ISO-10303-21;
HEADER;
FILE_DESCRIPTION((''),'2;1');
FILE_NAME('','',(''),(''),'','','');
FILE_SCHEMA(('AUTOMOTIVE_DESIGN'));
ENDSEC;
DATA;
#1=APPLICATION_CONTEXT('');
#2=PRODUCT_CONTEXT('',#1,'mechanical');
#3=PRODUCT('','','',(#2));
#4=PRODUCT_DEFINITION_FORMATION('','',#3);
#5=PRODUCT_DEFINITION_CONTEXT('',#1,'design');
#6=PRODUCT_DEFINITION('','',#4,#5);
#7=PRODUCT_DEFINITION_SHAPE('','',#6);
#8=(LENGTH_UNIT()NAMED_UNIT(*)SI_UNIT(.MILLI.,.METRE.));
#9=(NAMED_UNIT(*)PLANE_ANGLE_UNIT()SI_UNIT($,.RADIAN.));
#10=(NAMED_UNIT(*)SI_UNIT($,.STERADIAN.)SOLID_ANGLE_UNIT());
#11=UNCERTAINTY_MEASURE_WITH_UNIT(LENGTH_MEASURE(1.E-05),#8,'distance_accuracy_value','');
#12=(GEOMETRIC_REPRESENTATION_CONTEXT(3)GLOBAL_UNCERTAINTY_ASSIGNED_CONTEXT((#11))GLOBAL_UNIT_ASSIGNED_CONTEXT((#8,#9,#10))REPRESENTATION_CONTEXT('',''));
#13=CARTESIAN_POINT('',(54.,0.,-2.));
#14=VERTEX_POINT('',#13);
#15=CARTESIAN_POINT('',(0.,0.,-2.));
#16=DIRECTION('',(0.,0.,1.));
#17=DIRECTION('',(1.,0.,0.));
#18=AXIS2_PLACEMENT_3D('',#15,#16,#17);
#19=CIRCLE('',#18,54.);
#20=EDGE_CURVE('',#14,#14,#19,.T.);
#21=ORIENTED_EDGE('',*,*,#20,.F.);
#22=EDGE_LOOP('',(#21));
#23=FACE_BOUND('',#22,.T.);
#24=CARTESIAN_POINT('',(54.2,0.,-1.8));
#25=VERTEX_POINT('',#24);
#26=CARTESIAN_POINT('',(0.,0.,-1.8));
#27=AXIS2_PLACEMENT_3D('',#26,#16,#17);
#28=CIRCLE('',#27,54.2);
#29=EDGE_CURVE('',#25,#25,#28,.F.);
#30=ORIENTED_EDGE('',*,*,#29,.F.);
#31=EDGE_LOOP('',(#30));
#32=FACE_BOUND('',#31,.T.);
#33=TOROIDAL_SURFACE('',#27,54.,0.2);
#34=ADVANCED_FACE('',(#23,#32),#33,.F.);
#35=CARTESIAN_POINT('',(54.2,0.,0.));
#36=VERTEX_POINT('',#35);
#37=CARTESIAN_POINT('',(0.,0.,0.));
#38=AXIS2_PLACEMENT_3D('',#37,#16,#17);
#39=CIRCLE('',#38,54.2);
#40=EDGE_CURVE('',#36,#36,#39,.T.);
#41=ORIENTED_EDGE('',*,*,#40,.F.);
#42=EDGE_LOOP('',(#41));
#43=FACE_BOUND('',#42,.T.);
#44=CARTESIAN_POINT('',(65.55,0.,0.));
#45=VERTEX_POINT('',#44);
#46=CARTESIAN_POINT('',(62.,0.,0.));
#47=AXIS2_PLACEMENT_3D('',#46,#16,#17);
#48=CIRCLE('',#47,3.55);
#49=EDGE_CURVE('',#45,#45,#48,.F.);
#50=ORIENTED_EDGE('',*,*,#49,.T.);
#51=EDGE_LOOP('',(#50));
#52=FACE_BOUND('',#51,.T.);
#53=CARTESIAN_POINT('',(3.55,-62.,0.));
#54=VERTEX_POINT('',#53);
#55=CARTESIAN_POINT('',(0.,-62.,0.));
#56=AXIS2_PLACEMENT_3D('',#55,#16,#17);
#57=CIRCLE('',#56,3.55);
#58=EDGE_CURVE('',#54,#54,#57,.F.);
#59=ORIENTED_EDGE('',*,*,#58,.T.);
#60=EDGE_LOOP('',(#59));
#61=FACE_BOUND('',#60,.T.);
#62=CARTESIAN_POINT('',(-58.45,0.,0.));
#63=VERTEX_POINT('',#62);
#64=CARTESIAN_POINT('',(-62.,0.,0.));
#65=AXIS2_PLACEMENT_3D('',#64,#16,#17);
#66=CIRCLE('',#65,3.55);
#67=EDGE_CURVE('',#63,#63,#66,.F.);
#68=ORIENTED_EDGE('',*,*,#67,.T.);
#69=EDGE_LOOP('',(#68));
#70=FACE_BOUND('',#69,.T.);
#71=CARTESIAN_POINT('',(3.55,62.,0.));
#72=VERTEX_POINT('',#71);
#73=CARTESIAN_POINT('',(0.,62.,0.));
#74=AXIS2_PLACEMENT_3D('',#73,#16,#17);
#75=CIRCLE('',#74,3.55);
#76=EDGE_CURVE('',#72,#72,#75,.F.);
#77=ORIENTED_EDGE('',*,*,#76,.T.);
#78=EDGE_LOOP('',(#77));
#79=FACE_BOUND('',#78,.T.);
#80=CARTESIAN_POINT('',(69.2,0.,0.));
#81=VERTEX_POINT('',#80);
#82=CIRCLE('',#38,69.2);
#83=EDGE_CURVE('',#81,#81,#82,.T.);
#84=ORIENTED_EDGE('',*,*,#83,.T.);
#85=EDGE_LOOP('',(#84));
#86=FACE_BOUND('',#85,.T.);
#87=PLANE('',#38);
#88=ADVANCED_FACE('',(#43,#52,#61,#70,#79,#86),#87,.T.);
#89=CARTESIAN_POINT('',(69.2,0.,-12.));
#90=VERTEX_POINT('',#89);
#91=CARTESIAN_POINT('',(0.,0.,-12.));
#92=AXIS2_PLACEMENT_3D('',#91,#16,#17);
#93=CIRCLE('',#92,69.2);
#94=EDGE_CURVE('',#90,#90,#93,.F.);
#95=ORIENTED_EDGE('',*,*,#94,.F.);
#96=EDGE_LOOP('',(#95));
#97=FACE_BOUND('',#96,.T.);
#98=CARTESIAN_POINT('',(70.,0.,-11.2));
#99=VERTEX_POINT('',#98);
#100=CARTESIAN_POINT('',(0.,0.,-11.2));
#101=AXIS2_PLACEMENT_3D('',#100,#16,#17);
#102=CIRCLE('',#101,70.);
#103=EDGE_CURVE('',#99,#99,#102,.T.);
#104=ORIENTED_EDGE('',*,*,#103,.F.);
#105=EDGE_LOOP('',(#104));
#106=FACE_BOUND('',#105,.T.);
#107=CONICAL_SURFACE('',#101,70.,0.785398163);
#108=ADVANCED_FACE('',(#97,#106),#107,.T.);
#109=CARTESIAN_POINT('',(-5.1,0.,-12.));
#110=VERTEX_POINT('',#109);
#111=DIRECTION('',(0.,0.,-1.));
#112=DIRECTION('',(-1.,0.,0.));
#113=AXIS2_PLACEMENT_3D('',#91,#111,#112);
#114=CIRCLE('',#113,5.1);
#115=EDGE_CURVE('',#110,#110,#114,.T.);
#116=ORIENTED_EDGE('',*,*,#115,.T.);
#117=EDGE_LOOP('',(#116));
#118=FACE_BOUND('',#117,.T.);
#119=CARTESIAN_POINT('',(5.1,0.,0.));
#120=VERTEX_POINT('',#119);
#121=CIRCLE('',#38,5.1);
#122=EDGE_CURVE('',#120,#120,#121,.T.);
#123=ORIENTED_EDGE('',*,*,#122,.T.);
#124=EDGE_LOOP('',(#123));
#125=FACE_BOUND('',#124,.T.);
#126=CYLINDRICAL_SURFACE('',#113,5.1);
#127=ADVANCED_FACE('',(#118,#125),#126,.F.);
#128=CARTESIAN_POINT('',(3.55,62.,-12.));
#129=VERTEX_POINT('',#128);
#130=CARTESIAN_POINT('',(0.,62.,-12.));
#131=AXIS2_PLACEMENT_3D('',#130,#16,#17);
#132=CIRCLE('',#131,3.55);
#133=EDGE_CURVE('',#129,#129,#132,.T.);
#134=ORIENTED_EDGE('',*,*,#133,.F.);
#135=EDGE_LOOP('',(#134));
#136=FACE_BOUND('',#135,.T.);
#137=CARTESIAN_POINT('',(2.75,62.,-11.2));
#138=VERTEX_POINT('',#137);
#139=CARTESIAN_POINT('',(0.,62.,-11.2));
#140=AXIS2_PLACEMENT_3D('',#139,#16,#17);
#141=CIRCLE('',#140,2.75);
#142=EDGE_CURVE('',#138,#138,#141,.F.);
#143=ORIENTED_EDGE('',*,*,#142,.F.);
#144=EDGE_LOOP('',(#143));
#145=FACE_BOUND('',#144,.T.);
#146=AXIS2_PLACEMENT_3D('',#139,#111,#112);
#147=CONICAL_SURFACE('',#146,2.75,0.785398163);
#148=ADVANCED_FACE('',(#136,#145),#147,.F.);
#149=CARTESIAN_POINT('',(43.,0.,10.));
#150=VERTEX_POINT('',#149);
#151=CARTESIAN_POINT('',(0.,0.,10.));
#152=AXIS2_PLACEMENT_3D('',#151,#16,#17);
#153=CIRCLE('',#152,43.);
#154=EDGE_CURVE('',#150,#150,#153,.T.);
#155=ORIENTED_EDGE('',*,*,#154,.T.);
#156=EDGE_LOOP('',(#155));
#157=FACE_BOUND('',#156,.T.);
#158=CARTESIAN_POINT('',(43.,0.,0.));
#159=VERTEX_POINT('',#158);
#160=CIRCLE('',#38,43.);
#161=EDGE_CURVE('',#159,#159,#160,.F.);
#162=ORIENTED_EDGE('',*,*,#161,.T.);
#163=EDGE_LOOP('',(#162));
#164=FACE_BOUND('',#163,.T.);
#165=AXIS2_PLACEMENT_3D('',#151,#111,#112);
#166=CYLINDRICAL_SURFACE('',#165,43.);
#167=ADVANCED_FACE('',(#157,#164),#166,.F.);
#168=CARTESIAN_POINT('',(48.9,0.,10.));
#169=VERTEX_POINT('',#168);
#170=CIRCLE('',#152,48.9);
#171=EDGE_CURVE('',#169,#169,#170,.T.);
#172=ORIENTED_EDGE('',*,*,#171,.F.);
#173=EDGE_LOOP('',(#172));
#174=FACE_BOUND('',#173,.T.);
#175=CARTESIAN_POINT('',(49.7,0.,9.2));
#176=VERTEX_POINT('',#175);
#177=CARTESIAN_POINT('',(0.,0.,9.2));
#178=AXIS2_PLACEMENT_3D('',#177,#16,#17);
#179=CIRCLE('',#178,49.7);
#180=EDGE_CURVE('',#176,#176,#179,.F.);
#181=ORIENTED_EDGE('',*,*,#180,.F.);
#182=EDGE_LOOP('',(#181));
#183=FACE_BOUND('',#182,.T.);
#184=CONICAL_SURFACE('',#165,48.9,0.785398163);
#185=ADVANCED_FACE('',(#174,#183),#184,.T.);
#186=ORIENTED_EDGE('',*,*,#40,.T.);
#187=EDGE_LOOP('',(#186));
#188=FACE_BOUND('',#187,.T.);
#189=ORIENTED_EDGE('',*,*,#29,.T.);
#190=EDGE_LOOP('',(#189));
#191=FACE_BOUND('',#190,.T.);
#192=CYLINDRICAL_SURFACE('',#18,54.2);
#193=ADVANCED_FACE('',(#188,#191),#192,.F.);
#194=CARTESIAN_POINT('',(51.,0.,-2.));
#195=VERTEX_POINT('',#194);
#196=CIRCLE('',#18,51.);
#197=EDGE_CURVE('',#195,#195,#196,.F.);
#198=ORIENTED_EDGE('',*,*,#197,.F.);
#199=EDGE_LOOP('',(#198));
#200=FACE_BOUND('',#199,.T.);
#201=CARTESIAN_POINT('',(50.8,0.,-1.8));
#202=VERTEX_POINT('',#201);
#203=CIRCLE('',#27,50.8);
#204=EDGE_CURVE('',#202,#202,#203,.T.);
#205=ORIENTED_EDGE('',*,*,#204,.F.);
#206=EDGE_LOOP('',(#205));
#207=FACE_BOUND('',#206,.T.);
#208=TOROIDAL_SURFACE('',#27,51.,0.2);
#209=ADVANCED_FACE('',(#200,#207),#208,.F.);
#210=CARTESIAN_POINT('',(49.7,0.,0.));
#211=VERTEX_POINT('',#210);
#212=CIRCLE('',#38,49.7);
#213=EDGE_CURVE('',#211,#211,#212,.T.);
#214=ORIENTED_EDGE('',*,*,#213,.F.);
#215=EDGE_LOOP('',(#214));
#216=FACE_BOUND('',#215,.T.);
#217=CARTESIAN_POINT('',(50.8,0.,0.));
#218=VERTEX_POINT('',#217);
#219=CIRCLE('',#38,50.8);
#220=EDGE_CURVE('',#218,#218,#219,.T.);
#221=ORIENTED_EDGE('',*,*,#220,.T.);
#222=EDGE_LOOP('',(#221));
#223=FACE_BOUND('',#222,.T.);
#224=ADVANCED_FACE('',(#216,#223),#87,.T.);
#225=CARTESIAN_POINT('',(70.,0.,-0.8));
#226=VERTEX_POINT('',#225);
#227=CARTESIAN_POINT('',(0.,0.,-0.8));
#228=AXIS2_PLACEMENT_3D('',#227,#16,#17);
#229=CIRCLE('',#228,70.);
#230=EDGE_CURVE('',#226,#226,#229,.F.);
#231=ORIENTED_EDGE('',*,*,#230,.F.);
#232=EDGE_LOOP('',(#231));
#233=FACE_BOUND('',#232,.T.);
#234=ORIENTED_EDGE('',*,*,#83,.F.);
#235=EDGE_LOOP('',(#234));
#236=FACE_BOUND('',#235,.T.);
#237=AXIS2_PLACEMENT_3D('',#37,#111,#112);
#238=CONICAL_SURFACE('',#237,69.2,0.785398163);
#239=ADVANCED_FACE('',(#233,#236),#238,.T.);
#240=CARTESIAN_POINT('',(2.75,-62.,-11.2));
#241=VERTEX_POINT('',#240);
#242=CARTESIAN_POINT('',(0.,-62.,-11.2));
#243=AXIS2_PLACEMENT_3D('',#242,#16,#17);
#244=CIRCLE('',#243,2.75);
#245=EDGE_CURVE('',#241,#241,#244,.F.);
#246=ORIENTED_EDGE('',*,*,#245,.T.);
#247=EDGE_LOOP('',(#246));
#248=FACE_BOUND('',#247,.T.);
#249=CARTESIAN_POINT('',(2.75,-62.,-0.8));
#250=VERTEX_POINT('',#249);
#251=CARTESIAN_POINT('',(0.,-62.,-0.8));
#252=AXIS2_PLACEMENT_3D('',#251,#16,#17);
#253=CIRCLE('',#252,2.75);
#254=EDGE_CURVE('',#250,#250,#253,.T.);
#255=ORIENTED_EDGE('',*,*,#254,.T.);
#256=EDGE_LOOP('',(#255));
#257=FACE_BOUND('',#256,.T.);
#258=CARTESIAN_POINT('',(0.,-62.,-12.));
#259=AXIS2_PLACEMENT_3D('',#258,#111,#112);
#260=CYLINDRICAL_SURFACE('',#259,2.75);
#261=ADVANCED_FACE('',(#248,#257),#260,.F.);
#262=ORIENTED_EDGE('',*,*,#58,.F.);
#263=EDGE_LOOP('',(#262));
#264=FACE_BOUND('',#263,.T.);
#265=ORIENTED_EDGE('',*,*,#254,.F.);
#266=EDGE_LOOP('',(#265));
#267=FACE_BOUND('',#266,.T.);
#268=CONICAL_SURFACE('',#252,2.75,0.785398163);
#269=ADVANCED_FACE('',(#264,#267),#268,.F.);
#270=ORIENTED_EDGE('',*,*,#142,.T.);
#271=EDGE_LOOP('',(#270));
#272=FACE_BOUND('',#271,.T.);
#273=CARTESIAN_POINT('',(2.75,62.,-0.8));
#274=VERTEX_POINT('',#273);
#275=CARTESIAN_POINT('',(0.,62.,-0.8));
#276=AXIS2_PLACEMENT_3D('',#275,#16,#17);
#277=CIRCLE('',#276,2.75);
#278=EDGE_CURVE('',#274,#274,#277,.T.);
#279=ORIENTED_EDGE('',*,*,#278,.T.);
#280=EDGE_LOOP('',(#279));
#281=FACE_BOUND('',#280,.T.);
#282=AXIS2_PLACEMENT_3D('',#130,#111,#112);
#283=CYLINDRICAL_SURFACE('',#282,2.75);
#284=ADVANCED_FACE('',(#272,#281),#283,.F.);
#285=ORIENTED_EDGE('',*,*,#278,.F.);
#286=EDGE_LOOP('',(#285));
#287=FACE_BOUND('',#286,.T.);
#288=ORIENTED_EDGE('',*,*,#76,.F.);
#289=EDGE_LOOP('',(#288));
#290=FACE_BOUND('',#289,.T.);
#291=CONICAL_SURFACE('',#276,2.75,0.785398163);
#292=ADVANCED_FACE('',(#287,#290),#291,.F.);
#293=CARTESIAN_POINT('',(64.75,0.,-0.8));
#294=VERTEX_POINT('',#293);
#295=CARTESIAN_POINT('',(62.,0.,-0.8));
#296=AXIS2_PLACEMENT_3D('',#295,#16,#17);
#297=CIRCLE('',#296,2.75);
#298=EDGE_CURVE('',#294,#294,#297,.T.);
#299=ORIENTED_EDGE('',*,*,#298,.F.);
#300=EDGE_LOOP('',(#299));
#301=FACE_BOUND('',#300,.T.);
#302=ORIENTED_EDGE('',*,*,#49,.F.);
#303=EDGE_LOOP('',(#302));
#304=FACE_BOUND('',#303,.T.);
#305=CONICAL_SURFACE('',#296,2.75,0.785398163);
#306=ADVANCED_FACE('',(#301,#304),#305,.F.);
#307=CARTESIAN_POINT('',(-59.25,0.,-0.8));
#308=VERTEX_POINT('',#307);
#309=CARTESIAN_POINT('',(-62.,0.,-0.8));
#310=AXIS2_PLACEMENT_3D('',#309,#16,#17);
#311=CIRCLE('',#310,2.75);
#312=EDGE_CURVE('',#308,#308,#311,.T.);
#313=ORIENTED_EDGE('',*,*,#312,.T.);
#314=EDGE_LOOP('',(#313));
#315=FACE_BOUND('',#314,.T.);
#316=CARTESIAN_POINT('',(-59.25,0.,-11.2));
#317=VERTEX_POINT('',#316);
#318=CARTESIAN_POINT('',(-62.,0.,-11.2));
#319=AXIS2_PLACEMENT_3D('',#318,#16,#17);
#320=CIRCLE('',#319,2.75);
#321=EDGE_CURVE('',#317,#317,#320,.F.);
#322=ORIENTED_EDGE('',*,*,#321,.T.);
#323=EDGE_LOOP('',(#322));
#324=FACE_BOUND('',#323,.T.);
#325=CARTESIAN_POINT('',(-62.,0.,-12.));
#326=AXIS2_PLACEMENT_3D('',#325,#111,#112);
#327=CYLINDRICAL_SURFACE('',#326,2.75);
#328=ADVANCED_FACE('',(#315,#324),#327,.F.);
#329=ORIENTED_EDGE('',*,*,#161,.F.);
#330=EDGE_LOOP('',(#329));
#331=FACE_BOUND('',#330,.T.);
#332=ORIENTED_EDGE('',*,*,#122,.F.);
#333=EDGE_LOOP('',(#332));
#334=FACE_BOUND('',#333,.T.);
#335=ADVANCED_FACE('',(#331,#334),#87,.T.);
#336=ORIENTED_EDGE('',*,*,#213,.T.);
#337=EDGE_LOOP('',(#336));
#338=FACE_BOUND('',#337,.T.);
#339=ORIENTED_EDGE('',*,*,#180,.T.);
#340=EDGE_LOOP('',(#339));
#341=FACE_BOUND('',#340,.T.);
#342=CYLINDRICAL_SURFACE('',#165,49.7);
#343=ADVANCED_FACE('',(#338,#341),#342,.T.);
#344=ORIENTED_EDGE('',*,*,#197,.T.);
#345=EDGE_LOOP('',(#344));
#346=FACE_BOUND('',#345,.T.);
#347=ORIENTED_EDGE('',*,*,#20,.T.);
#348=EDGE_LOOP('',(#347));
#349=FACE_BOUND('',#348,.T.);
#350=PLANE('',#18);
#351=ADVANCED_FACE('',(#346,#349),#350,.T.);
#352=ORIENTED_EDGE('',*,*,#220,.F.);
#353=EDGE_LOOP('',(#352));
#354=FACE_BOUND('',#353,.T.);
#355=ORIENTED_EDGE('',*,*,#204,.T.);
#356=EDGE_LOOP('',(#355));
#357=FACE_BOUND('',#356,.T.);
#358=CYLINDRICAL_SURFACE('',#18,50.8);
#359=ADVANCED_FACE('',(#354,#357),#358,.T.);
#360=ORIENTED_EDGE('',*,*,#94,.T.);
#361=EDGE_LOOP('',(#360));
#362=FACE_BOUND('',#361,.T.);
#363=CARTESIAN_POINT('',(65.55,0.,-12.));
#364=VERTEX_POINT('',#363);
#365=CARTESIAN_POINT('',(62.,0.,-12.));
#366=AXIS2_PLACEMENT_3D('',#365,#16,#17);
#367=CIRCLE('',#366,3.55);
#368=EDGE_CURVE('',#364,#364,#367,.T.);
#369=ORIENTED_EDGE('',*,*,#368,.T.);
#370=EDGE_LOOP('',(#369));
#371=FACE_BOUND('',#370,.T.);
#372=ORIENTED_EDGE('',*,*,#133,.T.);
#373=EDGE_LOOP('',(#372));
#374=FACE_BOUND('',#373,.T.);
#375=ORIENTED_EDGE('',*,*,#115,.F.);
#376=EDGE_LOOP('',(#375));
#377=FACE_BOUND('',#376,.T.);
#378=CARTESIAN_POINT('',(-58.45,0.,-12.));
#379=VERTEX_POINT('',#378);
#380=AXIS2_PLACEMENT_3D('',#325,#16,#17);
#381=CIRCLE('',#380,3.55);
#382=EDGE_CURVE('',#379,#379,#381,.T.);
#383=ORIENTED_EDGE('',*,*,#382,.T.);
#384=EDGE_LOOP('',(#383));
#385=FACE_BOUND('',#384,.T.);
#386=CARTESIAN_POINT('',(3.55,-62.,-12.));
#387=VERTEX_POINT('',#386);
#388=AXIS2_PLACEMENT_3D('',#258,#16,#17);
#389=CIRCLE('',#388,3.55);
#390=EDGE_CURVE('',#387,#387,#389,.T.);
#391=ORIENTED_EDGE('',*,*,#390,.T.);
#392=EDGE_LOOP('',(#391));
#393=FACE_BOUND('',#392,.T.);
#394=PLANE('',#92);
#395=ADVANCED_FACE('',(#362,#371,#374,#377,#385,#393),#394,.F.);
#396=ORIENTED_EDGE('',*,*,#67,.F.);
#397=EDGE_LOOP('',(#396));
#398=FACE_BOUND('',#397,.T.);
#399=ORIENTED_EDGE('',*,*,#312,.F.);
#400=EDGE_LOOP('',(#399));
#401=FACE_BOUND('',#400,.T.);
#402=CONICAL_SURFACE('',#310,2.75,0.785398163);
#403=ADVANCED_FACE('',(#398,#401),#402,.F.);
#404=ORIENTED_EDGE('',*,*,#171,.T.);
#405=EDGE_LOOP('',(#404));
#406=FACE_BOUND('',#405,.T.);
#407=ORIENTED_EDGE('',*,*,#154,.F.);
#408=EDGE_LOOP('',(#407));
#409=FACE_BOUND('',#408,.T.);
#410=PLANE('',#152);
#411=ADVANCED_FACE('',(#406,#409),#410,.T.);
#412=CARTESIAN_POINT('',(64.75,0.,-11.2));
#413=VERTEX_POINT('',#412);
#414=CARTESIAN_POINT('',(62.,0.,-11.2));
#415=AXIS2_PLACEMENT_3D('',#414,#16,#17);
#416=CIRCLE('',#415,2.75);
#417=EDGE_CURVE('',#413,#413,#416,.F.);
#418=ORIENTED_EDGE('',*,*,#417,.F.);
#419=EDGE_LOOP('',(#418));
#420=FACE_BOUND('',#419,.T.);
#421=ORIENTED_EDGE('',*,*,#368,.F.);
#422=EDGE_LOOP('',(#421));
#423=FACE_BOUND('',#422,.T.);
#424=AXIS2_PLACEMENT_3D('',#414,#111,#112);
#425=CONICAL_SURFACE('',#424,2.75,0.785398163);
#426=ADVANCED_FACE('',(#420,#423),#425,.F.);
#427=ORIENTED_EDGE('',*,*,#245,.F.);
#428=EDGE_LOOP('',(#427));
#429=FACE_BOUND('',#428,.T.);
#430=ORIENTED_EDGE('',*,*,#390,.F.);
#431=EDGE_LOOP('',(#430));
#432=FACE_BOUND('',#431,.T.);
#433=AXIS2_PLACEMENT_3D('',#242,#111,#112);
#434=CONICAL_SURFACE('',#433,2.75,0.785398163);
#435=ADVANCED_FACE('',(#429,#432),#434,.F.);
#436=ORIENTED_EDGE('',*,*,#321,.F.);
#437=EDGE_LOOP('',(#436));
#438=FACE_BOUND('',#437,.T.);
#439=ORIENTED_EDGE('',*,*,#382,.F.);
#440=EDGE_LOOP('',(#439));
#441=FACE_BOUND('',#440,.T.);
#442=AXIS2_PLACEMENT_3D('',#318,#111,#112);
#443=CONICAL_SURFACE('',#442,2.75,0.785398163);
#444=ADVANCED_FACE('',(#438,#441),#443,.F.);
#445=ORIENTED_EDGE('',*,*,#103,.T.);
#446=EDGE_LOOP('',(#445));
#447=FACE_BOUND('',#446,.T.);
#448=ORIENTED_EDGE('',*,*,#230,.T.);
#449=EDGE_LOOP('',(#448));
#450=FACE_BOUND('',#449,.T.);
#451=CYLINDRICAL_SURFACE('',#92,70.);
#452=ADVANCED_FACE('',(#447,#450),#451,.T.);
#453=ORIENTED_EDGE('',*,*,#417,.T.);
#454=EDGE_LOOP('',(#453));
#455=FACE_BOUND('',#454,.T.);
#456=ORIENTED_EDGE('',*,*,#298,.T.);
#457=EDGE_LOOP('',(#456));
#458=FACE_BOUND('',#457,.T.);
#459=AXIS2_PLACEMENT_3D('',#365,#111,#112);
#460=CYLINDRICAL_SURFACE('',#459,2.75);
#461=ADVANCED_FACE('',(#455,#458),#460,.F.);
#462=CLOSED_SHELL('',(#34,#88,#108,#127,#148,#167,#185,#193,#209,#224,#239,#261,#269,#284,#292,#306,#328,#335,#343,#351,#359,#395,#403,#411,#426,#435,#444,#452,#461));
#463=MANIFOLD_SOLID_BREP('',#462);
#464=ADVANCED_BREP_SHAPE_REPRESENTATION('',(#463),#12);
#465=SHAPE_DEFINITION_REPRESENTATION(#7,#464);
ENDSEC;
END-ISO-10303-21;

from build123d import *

# Parameters (mm, degrees)
SKETCH1_R           = 70
PLATE_DEPTH         = 12
SKETCH3_R           = 49.7
SKETCH3_R_2         = 43
SPIGOT_RING_DEPTH   = 10
CHAMFER_2_SIZE      = 0.8
SKETCH4_R           = 54.2
SKETCH4_R_2         = 50.8
FACE_GROOVE_DEPTH   = 2
FILLET1_R           = 0.2
ROD_HOLES_START     = -12
ROD_HOLES_OUTLINE_R = 2.75
ROD_HOLES_DEPTH     = 12
CHAMFER2_SIZE       = 0.8
P_C_D               = 10.2


# Read off the part's stored shape, not the designer's step: Rod_holes
with BuildPart() as part:
    # Sketch1 → PLATE (new body)
    with BuildSketch(Plane.XY):
        Circle(SKETCH1_R)
    extrude(amount=-PLATE_DEPTH)

    # Sketch3 → Spigot_Ring (add)
    with BuildSketch(Plane.XY):
        Circle(SKETCH3_R)
        Circle(SKETCH3_R_2, mode=Mode.SUBTRACT)
    extrude(amount=SPIGOT_RING_DEPTH)

    # Chamfer 2
    chamfer_2_edges = [part.edges().sort_by_distance(p)[0] for p in [
        (-49.7, 0, 10),
    ]]
    chamfer(chamfer_2_edges, length=CHAMFER_2_SIZE)

    # Sketch4 → Face_Groove (cut)
    with BuildSketch(Plane.XY):
        Circle(SKETCH4_R)
        Circle(SKETCH4_R_2, mode=Mode.SUBTRACT)
    extrude(amount=-FACE_GROOVE_DEPTH, mode=Mode.SUBTRACT)

    # Fillet1
    fillet1_edges = [part.edges().sort_by_distance(p)[0] for p in [
        (-54.2, 0, -2),
        (-50.8, 0, -2),
    ]]
    fillet(fillet1_edges, radius=FILLET1_R)

    # Rod_holes outline → Rod_holes (cut)
    with BuildSketch(Plane.XY.offset(ROD_HOLES_START)):
        with Locations((-62, 0)):
            Circle(ROD_HOLES_OUTLINE_R)
        with Locations((0, -62)):
            Circle(ROD_HOLES_OUTLINE_R)
        with Locations((62, 0)):
            Circle(ROD_HOLES_OUTLINE_R)
        with Locations((0, 62)):
            Circle(ROD_HOLES_OUTLINE_R)
    extrude(amount=ROD_HOLES_DEPTH, mode=Mode.SUBTRACT)

    # Chamfer2
    chamfer2_edges = [part.edges().sort_by_distance(p)[0] for p in [
        (-70, 0, 0),
        (-64.75, 0, 0),
        (-64.75, 0, -12),
        (-2.75, -62, 0),
        (-2.75, -62, -12),
        (59.25, 0, 0),
        (59.25, 0, -12),
        (-70, 0, -12),
        (-2.75, 62, 0),
        (-2.75, 62, -12),
    ]]
    chamfer(chamfer2_edges, length=CHAMFER2_SIZE)

    # P_C (through all)
    with Locations(Plane(origin=(0, 0, -12), x_dir=(-1, 0, 0), z_dir=(0, 0, -1))):
        with Locations((0, 0)):
            Hole(P_C_D / 2)


solid = part.part
